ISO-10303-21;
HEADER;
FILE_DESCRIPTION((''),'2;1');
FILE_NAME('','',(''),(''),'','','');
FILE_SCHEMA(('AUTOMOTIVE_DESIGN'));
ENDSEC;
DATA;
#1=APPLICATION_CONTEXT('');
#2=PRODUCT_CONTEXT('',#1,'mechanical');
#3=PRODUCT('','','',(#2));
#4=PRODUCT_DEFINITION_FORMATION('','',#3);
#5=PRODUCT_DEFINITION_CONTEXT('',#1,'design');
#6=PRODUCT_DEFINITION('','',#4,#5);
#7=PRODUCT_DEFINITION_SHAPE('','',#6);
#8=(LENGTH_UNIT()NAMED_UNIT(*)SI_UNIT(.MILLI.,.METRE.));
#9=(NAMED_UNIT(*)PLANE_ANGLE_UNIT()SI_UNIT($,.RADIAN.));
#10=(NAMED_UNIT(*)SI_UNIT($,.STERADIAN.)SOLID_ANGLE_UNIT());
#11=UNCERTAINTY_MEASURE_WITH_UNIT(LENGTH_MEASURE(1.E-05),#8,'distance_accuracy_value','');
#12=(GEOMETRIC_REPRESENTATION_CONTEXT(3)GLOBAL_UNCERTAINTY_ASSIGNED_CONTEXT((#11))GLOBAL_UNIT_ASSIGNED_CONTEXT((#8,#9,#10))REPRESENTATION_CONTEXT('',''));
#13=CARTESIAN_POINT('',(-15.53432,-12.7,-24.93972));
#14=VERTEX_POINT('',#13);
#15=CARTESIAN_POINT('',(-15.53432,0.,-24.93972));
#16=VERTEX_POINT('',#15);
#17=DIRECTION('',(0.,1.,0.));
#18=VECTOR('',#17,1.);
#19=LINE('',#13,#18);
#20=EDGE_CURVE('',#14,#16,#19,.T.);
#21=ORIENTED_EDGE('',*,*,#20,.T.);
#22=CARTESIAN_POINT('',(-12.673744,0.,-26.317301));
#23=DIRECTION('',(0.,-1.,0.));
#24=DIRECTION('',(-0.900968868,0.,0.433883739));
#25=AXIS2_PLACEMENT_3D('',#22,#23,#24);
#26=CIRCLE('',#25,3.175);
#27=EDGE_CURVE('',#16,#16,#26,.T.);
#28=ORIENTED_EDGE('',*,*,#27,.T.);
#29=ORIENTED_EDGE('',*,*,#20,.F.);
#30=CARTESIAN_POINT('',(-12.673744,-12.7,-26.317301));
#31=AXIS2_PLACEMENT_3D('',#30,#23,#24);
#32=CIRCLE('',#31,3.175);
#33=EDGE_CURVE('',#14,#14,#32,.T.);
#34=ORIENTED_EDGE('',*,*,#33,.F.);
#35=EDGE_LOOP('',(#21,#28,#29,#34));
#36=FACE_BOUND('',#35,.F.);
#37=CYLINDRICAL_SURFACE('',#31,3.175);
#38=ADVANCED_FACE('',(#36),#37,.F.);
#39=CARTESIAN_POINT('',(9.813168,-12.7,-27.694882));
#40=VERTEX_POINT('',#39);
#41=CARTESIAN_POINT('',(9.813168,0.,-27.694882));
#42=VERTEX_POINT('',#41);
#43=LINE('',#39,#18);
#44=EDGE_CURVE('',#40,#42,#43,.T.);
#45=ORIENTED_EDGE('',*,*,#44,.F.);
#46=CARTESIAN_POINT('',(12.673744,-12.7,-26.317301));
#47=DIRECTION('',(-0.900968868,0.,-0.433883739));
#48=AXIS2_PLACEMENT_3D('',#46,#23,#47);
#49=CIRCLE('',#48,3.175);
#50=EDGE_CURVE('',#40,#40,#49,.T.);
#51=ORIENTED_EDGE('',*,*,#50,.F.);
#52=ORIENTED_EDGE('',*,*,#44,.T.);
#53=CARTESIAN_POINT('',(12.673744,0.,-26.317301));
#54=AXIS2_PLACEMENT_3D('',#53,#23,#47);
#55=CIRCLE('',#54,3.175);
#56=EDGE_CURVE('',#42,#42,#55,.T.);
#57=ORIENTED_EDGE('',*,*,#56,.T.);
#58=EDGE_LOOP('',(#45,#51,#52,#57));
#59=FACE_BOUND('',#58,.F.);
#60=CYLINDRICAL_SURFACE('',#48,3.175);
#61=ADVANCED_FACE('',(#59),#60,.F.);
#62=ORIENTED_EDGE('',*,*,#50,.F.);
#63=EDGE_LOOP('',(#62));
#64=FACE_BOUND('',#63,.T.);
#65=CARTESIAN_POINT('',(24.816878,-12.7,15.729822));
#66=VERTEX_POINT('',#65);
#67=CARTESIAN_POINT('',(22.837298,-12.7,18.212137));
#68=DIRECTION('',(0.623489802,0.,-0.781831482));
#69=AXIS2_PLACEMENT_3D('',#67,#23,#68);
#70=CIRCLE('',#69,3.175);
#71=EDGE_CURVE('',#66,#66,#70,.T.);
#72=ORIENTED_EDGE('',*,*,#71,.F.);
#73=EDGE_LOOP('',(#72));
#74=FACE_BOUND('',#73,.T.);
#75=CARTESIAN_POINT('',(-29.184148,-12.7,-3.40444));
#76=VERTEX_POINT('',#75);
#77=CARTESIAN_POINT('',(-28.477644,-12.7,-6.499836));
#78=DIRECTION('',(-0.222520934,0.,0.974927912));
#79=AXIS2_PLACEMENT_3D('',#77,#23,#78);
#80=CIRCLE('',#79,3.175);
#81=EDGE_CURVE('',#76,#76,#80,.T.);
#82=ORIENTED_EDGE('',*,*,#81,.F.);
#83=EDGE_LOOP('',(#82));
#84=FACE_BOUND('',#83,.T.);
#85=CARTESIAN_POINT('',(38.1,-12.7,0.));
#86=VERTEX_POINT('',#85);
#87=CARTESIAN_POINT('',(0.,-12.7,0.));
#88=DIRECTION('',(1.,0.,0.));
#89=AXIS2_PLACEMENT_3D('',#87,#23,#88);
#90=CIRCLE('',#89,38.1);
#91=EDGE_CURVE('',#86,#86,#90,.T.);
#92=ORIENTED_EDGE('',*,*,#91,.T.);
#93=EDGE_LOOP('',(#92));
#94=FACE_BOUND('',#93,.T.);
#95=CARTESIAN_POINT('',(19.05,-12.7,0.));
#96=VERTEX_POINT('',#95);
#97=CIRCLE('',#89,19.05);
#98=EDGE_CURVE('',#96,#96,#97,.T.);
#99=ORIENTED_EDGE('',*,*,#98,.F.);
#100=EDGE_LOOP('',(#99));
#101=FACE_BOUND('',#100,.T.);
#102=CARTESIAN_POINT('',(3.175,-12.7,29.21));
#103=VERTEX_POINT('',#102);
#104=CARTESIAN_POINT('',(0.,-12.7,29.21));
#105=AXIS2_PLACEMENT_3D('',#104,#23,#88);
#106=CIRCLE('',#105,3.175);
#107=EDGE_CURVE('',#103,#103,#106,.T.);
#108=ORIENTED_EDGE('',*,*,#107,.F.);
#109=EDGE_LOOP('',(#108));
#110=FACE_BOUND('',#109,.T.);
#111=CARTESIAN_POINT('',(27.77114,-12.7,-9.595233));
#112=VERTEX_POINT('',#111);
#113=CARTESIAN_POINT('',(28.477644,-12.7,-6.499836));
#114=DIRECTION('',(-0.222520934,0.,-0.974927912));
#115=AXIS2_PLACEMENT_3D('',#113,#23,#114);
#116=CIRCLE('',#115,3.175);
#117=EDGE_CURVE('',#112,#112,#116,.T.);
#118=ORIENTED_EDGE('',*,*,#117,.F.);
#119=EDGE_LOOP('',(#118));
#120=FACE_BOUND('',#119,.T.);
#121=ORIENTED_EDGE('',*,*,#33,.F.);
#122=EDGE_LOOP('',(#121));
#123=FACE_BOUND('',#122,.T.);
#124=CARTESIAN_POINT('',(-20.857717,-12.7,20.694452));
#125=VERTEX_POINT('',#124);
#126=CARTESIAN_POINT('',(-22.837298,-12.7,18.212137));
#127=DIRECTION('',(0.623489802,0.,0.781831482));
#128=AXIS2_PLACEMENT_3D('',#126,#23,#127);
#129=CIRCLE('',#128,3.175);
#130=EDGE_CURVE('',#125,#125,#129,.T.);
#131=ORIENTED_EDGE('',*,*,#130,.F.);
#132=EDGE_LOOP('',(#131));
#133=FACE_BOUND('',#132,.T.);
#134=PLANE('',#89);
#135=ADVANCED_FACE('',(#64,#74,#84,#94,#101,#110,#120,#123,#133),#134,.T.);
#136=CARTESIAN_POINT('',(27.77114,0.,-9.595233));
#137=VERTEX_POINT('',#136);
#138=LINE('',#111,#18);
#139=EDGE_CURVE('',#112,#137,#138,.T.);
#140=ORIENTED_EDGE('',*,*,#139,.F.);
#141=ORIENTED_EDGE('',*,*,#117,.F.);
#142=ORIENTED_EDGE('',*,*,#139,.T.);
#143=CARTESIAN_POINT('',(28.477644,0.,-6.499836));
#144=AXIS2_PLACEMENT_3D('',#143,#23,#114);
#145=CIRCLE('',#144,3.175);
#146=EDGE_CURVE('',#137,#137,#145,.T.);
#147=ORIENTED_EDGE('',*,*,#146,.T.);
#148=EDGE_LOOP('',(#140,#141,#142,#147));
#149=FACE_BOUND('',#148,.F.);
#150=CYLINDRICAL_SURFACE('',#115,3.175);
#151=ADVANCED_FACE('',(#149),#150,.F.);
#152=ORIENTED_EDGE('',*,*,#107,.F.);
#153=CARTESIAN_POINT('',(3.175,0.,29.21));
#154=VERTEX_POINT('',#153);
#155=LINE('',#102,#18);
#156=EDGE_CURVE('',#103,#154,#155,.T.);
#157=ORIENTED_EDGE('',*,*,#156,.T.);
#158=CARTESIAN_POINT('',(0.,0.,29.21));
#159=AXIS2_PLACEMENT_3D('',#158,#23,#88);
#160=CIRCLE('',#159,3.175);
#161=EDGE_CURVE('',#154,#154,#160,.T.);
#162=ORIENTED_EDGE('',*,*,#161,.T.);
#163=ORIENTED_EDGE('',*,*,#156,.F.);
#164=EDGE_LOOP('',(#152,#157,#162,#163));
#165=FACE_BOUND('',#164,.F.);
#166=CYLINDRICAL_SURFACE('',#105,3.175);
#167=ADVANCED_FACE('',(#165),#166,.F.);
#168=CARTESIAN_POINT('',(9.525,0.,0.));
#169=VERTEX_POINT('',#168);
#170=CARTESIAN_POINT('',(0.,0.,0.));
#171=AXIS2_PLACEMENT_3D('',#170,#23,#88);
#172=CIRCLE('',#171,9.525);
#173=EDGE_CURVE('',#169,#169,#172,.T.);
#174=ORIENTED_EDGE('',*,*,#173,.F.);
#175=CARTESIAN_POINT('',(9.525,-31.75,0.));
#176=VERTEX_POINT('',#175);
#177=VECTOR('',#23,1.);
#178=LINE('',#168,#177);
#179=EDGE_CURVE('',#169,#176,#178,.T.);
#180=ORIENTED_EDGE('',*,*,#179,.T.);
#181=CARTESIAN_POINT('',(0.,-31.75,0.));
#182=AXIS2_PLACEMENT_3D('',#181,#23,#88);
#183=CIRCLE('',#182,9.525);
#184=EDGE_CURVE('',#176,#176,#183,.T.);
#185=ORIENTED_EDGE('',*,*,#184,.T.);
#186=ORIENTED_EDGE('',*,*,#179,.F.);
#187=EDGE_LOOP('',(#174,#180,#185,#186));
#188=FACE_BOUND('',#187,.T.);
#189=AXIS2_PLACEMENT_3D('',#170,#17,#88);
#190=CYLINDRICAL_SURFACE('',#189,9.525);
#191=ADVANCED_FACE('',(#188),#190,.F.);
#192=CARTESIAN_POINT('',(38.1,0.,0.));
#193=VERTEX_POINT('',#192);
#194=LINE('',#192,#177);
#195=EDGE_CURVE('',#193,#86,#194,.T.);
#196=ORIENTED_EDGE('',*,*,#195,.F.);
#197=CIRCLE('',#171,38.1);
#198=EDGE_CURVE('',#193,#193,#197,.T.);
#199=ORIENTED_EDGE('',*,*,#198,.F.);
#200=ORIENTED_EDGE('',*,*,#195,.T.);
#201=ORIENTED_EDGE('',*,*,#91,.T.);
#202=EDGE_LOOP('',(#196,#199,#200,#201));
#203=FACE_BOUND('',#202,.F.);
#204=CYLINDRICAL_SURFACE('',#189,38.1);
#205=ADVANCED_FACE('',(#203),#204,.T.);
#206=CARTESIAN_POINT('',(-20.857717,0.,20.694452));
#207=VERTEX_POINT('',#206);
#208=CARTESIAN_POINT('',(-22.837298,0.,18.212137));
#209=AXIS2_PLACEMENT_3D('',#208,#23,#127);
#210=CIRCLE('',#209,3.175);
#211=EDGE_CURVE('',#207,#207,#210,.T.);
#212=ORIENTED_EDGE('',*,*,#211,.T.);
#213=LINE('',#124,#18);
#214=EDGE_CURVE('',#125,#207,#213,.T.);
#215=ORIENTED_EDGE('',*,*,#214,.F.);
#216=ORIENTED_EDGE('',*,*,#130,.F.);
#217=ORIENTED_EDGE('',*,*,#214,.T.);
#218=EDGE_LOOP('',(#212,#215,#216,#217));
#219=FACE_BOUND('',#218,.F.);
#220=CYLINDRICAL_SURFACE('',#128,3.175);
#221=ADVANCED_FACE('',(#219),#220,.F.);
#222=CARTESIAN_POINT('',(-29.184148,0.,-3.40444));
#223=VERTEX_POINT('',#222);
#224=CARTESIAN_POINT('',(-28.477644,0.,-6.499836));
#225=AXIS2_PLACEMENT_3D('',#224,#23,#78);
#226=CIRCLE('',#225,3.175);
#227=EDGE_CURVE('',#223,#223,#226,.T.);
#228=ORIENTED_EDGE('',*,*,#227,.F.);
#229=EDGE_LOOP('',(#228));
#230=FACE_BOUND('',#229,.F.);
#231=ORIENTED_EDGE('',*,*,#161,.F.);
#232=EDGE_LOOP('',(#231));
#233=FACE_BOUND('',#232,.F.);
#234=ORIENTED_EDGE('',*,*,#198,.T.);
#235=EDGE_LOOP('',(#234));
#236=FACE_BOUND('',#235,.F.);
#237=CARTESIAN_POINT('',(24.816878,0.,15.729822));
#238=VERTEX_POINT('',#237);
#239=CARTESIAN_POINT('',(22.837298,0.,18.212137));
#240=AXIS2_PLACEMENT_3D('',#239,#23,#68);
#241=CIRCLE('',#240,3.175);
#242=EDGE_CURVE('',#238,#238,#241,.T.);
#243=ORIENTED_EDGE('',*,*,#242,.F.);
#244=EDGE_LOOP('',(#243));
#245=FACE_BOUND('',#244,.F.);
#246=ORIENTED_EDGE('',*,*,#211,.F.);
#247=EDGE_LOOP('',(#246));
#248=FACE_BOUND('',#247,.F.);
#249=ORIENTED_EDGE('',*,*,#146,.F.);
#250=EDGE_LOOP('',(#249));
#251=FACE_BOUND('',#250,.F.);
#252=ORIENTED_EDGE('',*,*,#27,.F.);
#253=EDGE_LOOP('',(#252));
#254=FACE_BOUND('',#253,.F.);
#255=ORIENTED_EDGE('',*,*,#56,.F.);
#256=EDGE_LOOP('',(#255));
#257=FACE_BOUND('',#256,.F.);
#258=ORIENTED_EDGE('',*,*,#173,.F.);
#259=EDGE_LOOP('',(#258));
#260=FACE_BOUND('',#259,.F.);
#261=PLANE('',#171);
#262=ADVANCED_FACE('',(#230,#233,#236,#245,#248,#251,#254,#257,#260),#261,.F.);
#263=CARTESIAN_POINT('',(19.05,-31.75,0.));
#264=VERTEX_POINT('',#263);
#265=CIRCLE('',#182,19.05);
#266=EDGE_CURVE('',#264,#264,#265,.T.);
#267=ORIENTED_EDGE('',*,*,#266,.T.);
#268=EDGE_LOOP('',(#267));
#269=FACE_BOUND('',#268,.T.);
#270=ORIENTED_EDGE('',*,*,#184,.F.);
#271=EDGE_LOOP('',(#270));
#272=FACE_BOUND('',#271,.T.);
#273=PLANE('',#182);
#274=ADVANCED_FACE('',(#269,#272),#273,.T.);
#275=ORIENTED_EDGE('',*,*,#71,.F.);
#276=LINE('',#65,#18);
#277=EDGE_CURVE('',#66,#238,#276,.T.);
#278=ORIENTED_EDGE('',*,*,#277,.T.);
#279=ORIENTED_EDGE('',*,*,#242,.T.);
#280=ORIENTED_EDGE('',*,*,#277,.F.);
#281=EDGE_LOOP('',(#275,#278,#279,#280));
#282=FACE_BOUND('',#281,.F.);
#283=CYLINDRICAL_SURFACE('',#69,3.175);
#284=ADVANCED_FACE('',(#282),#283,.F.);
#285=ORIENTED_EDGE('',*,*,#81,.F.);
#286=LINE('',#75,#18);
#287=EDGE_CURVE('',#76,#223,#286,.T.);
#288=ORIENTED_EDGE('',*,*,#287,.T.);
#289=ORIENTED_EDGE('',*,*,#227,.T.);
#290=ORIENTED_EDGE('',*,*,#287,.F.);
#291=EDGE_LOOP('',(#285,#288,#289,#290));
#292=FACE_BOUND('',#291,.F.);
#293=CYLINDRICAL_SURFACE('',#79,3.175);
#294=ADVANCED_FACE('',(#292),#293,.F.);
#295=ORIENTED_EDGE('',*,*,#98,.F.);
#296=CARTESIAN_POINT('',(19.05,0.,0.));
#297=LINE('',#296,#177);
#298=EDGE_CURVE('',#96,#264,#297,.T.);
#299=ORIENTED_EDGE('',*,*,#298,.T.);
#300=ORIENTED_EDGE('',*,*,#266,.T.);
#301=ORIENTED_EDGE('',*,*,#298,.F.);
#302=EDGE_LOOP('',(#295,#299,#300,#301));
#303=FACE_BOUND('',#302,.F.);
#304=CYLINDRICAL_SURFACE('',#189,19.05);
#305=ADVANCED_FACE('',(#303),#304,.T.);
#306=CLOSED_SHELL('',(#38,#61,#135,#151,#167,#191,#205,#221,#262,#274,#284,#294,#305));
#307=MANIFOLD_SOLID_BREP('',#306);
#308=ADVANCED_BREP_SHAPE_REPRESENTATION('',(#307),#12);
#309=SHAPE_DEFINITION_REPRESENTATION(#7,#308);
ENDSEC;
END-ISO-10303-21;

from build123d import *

# Parameters (mm, degrees)
F0_R            = 38.1
F0_R_2          = 19.05
F1_DEPTH        = 12.7
F0_R_3          = 9.525
F2_DEPTH        = 31.75
F3_R            = 3.175
F4_DEPTH        = 12.701
F4_COPIES_COUNT = 7


# Not quite as in the source:
# - a pattern or mirror of a feature is missing from the dataset's text; its kind, count and spacing are read off the source's solid


with BuildPart() as f1:
    # F0 (on Front) → F1 (new body)
    with BuildSketch(Plane.XZ):
        Circle(F0_R)
        Circle(F0_R_2, mode=Mode.SUBTRACT)
    extrude(amount=F1_DEPTH)

    # F0 (on Front) → F2 (join)
    with BuildSketch(Plane.XZ):
        Circle(F0_R_2)
        Circle(F0_R_3, mode=Mode.SUBTRACT)
    extrude(amount=F2_DEPTH)

    # F3 (on face) → F4 (cut, through all)
    with BuildSketch(Plane.XZ.offset(12.7)):
        with Locations((0, 29.21)):
            Circle(F3_R)
    f4 = extrude(amount=-F4_DEPTH, mode=Mode.SUBTRACT)

    # F4_copies: F4 ×7 about axis
    f4_copies_axis = Axis((0, 0, 0), (0, 1, 0))
    for i in range(1, F4_COPIES_COUNT):
        add(f4.rotate(f4_copies_axis, i * 360 / F4_COPIES_COUNT), mode=Mode.SUBTRACT)


solid = f1.part
